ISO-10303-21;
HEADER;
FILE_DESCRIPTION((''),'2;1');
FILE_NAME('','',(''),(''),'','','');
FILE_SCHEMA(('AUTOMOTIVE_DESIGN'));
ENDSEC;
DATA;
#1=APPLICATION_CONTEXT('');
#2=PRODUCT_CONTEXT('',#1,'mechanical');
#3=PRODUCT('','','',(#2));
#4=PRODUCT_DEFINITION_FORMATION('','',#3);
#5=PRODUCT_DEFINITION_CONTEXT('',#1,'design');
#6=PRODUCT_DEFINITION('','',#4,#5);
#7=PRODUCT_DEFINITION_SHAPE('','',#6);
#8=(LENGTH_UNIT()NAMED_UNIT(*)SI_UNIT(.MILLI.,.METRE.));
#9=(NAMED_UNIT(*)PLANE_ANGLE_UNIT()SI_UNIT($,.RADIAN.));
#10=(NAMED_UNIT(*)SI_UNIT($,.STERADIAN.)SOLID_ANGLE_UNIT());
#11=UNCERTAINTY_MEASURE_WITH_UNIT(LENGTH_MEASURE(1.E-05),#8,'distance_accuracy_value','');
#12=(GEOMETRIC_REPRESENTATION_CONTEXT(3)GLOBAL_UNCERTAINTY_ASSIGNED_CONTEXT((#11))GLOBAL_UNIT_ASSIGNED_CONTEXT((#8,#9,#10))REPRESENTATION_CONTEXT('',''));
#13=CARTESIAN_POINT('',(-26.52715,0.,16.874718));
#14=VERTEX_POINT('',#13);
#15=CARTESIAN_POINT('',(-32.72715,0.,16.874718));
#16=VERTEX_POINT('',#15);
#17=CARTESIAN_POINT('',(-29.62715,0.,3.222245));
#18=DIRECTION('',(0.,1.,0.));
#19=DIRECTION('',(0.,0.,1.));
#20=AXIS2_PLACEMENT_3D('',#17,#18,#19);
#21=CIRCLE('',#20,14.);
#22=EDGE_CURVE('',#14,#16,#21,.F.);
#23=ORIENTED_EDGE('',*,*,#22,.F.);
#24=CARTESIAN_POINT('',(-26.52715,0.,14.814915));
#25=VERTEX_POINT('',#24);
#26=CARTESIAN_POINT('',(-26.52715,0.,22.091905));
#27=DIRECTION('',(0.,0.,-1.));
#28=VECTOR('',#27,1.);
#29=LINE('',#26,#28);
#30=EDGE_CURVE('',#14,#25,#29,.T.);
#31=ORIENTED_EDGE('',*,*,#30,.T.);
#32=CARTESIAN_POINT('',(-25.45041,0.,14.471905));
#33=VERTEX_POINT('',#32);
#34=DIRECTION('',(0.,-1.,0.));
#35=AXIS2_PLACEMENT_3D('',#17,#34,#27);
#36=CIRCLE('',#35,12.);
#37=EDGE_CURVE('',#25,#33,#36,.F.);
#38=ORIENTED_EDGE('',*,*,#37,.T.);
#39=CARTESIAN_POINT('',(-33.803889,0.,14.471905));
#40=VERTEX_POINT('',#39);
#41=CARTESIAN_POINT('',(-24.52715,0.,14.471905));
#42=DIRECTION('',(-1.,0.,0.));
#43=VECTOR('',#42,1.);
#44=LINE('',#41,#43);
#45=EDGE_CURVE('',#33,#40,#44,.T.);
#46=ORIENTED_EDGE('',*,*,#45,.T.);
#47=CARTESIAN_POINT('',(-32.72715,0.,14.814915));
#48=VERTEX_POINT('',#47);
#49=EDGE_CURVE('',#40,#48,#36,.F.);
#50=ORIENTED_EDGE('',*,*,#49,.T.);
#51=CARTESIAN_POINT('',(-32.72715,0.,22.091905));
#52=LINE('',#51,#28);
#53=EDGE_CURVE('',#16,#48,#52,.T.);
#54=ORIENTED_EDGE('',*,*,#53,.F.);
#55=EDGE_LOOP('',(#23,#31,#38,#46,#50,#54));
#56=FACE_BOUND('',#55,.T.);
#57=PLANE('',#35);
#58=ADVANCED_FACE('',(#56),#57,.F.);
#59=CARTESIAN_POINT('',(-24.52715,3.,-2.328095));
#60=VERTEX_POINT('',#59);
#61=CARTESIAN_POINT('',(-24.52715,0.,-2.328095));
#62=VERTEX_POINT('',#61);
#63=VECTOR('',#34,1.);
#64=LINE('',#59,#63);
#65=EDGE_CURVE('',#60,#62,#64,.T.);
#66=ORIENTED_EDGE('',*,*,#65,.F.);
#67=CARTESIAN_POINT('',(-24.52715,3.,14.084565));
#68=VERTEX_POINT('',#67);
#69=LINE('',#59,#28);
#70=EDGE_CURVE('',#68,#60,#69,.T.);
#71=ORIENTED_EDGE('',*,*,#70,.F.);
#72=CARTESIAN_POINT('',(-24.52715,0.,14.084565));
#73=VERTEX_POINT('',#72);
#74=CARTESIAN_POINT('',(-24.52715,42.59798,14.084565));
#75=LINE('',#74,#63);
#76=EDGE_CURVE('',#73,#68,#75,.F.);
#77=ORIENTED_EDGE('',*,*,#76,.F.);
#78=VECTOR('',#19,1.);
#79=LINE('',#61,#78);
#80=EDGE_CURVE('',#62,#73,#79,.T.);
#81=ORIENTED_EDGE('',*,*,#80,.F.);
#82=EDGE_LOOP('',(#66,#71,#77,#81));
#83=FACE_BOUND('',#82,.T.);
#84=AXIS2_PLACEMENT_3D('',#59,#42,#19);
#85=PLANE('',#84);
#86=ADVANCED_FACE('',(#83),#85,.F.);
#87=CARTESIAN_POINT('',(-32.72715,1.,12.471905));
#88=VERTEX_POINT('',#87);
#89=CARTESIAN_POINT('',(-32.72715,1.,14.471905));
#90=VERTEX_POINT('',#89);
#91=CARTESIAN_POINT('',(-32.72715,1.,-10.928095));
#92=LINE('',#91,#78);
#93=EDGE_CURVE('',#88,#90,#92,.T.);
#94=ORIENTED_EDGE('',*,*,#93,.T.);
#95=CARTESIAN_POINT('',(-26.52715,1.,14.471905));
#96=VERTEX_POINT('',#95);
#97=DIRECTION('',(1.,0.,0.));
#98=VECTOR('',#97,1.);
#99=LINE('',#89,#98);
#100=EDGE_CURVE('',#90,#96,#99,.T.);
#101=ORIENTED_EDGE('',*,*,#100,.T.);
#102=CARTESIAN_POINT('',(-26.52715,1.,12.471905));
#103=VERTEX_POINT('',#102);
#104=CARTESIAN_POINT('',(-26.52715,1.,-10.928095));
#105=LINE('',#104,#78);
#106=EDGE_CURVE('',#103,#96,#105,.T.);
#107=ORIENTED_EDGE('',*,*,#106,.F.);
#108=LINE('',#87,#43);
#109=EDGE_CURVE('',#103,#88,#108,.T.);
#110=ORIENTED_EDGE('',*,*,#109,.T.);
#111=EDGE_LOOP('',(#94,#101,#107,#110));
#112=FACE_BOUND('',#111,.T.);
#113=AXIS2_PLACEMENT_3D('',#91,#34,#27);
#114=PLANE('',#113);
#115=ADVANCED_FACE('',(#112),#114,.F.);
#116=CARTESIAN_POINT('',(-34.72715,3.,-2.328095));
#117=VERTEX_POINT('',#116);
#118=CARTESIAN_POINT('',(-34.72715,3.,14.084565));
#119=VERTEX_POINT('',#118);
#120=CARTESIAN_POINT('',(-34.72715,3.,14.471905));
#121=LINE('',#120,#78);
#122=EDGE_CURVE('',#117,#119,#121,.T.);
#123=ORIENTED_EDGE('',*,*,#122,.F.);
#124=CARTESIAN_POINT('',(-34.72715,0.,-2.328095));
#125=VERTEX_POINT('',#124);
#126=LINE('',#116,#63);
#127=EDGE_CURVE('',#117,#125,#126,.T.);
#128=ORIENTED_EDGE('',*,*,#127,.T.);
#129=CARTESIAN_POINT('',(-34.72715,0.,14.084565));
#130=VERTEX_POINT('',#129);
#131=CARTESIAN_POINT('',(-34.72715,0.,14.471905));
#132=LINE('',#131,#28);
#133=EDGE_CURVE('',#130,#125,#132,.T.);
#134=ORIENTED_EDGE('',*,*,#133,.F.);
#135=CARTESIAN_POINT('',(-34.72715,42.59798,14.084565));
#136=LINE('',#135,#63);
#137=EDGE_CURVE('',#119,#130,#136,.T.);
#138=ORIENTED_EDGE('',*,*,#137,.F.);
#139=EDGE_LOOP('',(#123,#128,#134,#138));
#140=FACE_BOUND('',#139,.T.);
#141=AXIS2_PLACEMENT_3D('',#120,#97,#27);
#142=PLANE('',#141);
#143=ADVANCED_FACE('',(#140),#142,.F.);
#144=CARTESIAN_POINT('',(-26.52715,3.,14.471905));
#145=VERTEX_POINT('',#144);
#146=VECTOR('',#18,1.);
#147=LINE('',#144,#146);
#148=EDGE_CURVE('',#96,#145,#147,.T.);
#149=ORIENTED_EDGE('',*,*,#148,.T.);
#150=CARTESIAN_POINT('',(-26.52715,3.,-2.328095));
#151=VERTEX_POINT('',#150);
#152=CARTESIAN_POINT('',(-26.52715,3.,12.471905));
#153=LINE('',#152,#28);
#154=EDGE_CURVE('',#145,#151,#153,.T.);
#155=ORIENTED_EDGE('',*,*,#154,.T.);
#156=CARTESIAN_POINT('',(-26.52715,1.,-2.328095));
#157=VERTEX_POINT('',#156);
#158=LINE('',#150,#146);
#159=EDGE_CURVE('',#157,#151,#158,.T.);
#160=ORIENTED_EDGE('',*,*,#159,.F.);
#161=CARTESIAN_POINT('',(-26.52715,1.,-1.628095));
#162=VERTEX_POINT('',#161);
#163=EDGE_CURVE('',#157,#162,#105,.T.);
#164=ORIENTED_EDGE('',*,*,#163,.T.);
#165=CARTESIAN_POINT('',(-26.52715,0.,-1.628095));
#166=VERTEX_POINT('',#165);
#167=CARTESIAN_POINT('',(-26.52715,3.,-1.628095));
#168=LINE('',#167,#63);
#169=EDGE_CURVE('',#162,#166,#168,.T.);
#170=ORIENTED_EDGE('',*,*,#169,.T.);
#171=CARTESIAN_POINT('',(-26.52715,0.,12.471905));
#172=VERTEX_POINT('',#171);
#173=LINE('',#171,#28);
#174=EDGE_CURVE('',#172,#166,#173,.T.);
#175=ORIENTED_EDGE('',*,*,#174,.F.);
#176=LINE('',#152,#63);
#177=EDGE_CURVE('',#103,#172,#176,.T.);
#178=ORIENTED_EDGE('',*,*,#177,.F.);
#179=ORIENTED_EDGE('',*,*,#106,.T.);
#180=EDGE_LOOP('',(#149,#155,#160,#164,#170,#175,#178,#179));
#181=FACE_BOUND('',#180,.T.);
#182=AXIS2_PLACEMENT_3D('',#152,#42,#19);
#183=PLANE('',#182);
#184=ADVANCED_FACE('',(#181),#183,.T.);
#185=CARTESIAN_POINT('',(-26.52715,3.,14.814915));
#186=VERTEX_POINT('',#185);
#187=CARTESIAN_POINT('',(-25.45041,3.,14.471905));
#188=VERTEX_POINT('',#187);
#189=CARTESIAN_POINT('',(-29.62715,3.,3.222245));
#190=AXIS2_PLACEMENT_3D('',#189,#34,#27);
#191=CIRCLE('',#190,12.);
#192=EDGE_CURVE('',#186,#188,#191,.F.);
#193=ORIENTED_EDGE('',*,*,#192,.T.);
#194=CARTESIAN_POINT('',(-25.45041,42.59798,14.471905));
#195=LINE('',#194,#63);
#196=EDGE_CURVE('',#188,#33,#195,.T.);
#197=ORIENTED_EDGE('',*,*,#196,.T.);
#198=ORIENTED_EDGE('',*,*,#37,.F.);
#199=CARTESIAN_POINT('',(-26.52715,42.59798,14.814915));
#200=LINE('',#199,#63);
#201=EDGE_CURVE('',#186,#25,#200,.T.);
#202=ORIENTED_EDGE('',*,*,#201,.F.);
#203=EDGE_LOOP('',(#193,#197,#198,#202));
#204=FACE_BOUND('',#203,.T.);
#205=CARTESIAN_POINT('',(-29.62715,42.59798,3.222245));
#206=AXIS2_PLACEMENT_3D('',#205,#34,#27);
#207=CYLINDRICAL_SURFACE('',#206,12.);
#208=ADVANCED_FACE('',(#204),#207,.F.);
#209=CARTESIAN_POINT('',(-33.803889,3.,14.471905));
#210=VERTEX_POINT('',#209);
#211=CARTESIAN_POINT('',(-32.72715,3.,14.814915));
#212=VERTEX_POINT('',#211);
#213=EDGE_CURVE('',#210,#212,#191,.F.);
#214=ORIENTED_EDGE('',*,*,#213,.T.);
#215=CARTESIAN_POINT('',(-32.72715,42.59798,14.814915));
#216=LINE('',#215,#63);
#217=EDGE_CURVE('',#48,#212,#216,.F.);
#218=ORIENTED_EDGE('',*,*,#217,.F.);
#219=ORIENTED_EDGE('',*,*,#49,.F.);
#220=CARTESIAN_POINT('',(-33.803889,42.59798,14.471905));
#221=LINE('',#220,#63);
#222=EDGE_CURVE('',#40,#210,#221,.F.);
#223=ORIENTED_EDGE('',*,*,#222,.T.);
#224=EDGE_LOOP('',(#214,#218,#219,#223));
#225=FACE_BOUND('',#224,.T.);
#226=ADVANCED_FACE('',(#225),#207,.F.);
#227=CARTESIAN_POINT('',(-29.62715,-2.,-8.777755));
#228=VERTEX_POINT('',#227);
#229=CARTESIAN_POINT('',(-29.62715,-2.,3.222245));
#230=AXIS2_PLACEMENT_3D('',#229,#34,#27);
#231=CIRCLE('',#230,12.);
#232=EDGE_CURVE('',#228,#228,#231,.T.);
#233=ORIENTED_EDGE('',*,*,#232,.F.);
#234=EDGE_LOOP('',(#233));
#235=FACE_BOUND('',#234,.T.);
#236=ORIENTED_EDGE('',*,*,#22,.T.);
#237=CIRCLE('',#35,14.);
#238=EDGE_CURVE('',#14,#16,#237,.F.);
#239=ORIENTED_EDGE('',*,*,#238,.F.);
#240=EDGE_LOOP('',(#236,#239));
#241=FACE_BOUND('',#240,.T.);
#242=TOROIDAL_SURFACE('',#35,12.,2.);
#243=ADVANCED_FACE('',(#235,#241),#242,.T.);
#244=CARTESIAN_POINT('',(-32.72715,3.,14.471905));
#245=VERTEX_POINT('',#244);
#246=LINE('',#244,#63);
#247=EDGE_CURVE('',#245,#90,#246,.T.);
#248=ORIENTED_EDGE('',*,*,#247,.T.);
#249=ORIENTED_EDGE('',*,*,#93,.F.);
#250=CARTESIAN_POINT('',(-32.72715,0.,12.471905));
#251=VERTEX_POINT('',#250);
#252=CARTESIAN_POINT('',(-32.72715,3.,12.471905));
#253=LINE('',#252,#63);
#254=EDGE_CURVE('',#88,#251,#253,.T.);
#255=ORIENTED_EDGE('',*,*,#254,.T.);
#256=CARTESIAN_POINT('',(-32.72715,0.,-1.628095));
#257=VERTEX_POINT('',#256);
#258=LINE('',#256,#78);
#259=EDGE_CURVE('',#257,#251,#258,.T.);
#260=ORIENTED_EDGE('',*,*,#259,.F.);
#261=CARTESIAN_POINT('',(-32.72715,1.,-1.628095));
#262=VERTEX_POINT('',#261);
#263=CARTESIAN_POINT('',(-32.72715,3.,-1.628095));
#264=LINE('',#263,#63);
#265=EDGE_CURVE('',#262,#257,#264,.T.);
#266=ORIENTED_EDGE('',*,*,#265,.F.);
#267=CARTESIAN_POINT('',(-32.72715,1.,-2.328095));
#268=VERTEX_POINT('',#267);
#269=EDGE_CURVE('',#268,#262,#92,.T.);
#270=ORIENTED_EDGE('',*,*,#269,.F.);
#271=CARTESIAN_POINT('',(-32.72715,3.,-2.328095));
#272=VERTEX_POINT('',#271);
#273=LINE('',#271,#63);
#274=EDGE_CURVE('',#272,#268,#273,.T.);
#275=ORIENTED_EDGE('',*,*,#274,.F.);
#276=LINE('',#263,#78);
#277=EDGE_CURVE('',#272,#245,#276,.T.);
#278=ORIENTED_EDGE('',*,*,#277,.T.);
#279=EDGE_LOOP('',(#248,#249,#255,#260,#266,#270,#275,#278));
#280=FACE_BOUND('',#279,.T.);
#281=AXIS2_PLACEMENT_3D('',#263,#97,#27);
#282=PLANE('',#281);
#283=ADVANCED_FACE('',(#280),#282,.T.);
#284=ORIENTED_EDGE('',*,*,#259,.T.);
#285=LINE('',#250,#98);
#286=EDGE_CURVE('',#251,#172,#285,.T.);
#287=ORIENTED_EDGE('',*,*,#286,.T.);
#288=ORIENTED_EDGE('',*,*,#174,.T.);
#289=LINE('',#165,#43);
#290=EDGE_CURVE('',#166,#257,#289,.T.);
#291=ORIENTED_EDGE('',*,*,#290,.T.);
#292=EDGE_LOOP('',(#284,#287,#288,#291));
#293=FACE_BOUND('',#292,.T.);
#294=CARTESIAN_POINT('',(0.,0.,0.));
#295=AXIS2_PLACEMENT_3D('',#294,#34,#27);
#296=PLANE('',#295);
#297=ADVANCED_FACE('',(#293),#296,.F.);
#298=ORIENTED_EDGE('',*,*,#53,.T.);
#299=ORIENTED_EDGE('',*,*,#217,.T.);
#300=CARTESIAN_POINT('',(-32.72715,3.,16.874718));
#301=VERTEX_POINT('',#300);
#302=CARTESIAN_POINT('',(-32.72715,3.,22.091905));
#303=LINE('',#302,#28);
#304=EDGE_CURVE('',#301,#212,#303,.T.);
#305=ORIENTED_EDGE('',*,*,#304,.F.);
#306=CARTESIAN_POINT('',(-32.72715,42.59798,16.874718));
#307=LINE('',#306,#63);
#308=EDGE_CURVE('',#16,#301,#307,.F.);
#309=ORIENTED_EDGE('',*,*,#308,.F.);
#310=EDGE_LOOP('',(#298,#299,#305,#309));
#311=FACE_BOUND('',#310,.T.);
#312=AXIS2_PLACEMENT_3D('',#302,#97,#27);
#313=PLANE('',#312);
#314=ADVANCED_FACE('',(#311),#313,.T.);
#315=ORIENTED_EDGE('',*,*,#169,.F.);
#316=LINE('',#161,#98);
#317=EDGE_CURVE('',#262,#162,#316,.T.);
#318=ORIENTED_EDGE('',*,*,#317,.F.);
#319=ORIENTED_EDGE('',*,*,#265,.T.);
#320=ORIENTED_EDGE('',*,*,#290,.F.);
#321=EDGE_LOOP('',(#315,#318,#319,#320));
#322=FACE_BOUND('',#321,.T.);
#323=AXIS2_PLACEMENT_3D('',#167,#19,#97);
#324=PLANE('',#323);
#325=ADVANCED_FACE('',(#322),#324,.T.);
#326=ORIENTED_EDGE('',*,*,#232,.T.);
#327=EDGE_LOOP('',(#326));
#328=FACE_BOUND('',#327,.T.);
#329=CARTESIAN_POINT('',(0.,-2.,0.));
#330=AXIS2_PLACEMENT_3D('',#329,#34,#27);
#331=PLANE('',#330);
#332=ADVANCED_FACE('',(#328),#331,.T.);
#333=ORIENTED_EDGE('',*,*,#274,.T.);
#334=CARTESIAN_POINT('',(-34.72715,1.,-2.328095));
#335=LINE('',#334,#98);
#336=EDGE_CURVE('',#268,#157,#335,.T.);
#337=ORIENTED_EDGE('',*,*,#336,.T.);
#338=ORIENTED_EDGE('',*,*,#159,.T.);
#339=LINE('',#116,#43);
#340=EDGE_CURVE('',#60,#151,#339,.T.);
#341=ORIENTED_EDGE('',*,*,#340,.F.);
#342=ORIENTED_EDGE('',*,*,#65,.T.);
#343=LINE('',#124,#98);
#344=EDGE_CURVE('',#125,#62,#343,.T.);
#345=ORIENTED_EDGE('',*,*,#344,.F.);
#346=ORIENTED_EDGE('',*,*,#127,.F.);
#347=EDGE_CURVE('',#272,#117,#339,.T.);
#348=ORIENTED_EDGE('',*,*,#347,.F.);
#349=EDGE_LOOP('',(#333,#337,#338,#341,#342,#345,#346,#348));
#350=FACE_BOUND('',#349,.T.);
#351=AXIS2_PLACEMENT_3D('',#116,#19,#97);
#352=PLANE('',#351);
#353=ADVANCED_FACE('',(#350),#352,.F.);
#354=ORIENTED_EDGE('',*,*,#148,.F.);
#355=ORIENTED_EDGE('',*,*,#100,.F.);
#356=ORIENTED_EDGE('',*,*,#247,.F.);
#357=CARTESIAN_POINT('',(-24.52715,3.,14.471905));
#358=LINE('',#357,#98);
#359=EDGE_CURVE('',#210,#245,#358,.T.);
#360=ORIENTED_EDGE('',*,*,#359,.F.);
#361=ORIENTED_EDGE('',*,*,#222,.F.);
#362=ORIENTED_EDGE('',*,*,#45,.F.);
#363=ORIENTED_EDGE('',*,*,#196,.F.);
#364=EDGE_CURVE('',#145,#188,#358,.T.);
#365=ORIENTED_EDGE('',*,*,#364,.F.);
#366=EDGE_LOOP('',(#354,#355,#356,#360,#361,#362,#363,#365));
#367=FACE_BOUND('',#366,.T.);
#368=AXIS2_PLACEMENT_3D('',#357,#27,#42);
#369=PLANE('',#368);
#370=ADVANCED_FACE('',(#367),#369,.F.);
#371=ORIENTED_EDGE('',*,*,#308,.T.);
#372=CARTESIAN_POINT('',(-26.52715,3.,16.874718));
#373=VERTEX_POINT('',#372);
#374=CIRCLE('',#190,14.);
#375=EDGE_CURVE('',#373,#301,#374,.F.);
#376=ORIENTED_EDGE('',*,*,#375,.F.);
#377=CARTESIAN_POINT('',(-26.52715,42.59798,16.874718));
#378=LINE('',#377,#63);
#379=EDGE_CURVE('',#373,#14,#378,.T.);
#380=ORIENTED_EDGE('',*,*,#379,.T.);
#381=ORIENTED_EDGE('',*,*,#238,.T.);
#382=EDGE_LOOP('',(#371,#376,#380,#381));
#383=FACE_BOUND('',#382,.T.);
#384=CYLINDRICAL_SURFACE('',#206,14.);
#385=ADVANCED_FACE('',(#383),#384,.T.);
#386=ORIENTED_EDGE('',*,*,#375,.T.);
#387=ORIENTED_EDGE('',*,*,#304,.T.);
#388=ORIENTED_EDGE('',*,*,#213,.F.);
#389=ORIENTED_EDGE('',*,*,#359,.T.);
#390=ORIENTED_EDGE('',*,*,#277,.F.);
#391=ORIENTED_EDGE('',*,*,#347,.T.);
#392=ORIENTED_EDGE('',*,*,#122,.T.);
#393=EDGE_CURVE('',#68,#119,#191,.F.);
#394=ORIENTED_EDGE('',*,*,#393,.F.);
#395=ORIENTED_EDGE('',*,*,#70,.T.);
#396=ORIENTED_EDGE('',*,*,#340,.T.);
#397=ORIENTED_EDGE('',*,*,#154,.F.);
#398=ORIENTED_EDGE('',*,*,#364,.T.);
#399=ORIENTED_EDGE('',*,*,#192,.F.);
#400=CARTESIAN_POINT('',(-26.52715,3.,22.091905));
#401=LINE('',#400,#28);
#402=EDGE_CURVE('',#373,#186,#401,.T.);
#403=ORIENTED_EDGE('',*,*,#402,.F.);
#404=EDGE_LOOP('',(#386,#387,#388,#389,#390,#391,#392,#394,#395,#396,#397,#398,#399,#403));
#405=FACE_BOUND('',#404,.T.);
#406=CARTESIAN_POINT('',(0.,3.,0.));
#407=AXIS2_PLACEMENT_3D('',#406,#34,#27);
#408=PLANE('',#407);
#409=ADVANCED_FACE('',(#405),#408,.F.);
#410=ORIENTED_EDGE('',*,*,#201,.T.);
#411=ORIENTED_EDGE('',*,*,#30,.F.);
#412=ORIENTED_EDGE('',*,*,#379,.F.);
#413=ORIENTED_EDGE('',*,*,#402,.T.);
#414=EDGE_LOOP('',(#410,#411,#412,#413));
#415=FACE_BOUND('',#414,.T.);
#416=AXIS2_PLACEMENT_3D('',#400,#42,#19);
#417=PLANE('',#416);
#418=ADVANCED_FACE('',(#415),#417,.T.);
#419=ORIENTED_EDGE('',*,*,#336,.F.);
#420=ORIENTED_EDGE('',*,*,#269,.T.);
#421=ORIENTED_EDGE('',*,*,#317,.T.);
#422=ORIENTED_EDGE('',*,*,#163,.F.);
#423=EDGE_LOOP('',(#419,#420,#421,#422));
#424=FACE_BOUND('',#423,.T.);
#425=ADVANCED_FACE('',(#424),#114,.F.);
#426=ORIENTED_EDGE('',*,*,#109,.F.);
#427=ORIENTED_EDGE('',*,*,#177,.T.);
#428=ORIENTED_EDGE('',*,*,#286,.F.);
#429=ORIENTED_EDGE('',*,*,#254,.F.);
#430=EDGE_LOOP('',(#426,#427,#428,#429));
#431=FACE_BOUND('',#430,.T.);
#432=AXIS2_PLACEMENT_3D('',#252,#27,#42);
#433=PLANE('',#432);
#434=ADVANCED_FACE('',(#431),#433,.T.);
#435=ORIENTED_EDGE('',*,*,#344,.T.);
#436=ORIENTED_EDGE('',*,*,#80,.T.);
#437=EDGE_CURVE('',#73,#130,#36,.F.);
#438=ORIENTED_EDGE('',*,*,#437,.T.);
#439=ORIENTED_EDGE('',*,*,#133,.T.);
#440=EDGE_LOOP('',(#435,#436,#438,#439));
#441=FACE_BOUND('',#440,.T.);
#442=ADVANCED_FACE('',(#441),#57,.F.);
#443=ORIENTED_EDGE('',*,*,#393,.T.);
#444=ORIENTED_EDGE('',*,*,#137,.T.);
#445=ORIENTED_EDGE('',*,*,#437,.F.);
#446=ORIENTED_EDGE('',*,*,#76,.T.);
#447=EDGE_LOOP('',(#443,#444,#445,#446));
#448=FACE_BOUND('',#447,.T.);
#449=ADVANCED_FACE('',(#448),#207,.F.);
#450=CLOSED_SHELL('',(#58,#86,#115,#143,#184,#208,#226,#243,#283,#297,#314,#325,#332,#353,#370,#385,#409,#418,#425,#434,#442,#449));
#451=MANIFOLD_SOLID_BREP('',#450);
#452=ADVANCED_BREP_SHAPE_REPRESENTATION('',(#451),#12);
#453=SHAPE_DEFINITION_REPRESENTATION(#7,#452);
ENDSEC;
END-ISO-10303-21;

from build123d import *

# Parameters (mm, degrees)
SKETCH1_W           = 10.2
SKETCH1_H           = 16.8
SKETCH1_W_2         = 6.2
SKETCH1_H_2         = 14.1
BOSS_EXTRUDE1_DEPTH = 3
SKETCH2_W           = 6.2
SKETCH2_H           = 2
CUT_EXTRUDE1_DEPTH  = 25.4
SKETCH3_W           = 10.2
SKETCH3_H           = 16.8
BOSS_EXTRUDE2_DEPTH = 2
SKETCH4_R           = 14
SKETCH4_R_2         = 12
BOSS_EXTRUDE4_DEPTH = 5
SKETCH5_R           = 14
BOSS_EXTRUDE5_DEPTH = 2
SKETCH6_W           = 6.2
SKETCH6_H           = 3
CUT_EXTRUDE2_DEPTH  = 7.62


with BuildPart() as part:
    # Sketch1 → Boss-Extrude1 (new body)
    with BuildSketch(Plane(origin=(0, 0, 0), x_dir=(1, 0, 0), z_dir=(0, 1, 0))):
        with Locations((-29.627149571, -6.071905286)):
            Rectangle(SKETCH1_W, SKETCH1_H)
        with Locations((-29.627149571, -5.421905286)):
            Rectangle(SKETCH1_W_2, SKETCH1_H_2, mode=Mode.SUBTRACT)
    extrude(amount=BOSS_EXTRUDE1_DEPTH)

    # Sketch2 → Cut-Extrude1 (cut)
    with BuildSketch(Plane.XY.offset(14.471905286)):
        with Locations((-29.627149571, 2)):
            Rectangle(SKETCH2_W, SKETCH2_H)
    extrude(amount=-CUT_EXTRUDE1_DEPTH, mode=Mode.SUBTRACT)

    # Sketch3 → Boss-Extrude2 (add)
    with BuildSketch(Plane.XZ):
        with Locations((-29.627149571, 6.071905286)):
            Rectangle(SKETCH3_W, SKETCH3_H)
    extrude(amount=BOSS_EXTRUDE2_DEPTH)

    # Sketch4 → Boss-Extrude4 (add)
    with BuildSketch(Plane.XZ.offset(2)):
        with Locations(Location((-29.627149571, 3.222245286, 0), (0, 0, 270))):
            Circle(SKETCH4_R)
        with Locations((-29.627149571, 3.222245286)):
            Circle(SKETCH4_R_2, mode=Mode.SUBTRACT)
    extrude(amount=-BOSS_EXTRUDE4_DEPTH)

    # Sketch5 → Boss-Extrude5 (add)
    with BuildSketch(Plane.XZ.offset(2)):
        with Locations(Location((-29.627149571, 3.222245286, 0), (0, 0, 270))):
            Circle(SKETCH5_R)
    extrude(amount=-BOSS_EXTRUDE5_DEPTH)

    # Sketch6 → Cut-Extrude2 (cut)
    with BuildSketch(Plane.XY.offset(14.471905286)):
        with Locations((-29.627149571, 1.5)):
            Rectangle(SKETCH6_W, SKETCH6_H)
    extrude(amount=CUT_EXTRUDE2_DEPTH, mode=Mode.SUBTRACT)

    # Fillet2: read off the stored shape, not the designer's step
    # Fillet2 outline → Fillet2 (revolve, cut)
    with BuildSketch(Plane(origin=(-29.627149571, 0, 3.222245286), x_dir=(1, 0, 0), z_dir=(0, 0, 1))):
        with BuildLine():
            Line((14, -2), (14, 0))
            ThreePointArc((14, 0), (13.414213562, -1.414213562), (12, -2))
            Line((12, -2), (14, -2))
        make_face()
    revolve(axis=Axis((-29.627149571, 0, 3.222245286), (0, 1, 0)), mode=Mode.SUBTRACT)


solid = part.part
